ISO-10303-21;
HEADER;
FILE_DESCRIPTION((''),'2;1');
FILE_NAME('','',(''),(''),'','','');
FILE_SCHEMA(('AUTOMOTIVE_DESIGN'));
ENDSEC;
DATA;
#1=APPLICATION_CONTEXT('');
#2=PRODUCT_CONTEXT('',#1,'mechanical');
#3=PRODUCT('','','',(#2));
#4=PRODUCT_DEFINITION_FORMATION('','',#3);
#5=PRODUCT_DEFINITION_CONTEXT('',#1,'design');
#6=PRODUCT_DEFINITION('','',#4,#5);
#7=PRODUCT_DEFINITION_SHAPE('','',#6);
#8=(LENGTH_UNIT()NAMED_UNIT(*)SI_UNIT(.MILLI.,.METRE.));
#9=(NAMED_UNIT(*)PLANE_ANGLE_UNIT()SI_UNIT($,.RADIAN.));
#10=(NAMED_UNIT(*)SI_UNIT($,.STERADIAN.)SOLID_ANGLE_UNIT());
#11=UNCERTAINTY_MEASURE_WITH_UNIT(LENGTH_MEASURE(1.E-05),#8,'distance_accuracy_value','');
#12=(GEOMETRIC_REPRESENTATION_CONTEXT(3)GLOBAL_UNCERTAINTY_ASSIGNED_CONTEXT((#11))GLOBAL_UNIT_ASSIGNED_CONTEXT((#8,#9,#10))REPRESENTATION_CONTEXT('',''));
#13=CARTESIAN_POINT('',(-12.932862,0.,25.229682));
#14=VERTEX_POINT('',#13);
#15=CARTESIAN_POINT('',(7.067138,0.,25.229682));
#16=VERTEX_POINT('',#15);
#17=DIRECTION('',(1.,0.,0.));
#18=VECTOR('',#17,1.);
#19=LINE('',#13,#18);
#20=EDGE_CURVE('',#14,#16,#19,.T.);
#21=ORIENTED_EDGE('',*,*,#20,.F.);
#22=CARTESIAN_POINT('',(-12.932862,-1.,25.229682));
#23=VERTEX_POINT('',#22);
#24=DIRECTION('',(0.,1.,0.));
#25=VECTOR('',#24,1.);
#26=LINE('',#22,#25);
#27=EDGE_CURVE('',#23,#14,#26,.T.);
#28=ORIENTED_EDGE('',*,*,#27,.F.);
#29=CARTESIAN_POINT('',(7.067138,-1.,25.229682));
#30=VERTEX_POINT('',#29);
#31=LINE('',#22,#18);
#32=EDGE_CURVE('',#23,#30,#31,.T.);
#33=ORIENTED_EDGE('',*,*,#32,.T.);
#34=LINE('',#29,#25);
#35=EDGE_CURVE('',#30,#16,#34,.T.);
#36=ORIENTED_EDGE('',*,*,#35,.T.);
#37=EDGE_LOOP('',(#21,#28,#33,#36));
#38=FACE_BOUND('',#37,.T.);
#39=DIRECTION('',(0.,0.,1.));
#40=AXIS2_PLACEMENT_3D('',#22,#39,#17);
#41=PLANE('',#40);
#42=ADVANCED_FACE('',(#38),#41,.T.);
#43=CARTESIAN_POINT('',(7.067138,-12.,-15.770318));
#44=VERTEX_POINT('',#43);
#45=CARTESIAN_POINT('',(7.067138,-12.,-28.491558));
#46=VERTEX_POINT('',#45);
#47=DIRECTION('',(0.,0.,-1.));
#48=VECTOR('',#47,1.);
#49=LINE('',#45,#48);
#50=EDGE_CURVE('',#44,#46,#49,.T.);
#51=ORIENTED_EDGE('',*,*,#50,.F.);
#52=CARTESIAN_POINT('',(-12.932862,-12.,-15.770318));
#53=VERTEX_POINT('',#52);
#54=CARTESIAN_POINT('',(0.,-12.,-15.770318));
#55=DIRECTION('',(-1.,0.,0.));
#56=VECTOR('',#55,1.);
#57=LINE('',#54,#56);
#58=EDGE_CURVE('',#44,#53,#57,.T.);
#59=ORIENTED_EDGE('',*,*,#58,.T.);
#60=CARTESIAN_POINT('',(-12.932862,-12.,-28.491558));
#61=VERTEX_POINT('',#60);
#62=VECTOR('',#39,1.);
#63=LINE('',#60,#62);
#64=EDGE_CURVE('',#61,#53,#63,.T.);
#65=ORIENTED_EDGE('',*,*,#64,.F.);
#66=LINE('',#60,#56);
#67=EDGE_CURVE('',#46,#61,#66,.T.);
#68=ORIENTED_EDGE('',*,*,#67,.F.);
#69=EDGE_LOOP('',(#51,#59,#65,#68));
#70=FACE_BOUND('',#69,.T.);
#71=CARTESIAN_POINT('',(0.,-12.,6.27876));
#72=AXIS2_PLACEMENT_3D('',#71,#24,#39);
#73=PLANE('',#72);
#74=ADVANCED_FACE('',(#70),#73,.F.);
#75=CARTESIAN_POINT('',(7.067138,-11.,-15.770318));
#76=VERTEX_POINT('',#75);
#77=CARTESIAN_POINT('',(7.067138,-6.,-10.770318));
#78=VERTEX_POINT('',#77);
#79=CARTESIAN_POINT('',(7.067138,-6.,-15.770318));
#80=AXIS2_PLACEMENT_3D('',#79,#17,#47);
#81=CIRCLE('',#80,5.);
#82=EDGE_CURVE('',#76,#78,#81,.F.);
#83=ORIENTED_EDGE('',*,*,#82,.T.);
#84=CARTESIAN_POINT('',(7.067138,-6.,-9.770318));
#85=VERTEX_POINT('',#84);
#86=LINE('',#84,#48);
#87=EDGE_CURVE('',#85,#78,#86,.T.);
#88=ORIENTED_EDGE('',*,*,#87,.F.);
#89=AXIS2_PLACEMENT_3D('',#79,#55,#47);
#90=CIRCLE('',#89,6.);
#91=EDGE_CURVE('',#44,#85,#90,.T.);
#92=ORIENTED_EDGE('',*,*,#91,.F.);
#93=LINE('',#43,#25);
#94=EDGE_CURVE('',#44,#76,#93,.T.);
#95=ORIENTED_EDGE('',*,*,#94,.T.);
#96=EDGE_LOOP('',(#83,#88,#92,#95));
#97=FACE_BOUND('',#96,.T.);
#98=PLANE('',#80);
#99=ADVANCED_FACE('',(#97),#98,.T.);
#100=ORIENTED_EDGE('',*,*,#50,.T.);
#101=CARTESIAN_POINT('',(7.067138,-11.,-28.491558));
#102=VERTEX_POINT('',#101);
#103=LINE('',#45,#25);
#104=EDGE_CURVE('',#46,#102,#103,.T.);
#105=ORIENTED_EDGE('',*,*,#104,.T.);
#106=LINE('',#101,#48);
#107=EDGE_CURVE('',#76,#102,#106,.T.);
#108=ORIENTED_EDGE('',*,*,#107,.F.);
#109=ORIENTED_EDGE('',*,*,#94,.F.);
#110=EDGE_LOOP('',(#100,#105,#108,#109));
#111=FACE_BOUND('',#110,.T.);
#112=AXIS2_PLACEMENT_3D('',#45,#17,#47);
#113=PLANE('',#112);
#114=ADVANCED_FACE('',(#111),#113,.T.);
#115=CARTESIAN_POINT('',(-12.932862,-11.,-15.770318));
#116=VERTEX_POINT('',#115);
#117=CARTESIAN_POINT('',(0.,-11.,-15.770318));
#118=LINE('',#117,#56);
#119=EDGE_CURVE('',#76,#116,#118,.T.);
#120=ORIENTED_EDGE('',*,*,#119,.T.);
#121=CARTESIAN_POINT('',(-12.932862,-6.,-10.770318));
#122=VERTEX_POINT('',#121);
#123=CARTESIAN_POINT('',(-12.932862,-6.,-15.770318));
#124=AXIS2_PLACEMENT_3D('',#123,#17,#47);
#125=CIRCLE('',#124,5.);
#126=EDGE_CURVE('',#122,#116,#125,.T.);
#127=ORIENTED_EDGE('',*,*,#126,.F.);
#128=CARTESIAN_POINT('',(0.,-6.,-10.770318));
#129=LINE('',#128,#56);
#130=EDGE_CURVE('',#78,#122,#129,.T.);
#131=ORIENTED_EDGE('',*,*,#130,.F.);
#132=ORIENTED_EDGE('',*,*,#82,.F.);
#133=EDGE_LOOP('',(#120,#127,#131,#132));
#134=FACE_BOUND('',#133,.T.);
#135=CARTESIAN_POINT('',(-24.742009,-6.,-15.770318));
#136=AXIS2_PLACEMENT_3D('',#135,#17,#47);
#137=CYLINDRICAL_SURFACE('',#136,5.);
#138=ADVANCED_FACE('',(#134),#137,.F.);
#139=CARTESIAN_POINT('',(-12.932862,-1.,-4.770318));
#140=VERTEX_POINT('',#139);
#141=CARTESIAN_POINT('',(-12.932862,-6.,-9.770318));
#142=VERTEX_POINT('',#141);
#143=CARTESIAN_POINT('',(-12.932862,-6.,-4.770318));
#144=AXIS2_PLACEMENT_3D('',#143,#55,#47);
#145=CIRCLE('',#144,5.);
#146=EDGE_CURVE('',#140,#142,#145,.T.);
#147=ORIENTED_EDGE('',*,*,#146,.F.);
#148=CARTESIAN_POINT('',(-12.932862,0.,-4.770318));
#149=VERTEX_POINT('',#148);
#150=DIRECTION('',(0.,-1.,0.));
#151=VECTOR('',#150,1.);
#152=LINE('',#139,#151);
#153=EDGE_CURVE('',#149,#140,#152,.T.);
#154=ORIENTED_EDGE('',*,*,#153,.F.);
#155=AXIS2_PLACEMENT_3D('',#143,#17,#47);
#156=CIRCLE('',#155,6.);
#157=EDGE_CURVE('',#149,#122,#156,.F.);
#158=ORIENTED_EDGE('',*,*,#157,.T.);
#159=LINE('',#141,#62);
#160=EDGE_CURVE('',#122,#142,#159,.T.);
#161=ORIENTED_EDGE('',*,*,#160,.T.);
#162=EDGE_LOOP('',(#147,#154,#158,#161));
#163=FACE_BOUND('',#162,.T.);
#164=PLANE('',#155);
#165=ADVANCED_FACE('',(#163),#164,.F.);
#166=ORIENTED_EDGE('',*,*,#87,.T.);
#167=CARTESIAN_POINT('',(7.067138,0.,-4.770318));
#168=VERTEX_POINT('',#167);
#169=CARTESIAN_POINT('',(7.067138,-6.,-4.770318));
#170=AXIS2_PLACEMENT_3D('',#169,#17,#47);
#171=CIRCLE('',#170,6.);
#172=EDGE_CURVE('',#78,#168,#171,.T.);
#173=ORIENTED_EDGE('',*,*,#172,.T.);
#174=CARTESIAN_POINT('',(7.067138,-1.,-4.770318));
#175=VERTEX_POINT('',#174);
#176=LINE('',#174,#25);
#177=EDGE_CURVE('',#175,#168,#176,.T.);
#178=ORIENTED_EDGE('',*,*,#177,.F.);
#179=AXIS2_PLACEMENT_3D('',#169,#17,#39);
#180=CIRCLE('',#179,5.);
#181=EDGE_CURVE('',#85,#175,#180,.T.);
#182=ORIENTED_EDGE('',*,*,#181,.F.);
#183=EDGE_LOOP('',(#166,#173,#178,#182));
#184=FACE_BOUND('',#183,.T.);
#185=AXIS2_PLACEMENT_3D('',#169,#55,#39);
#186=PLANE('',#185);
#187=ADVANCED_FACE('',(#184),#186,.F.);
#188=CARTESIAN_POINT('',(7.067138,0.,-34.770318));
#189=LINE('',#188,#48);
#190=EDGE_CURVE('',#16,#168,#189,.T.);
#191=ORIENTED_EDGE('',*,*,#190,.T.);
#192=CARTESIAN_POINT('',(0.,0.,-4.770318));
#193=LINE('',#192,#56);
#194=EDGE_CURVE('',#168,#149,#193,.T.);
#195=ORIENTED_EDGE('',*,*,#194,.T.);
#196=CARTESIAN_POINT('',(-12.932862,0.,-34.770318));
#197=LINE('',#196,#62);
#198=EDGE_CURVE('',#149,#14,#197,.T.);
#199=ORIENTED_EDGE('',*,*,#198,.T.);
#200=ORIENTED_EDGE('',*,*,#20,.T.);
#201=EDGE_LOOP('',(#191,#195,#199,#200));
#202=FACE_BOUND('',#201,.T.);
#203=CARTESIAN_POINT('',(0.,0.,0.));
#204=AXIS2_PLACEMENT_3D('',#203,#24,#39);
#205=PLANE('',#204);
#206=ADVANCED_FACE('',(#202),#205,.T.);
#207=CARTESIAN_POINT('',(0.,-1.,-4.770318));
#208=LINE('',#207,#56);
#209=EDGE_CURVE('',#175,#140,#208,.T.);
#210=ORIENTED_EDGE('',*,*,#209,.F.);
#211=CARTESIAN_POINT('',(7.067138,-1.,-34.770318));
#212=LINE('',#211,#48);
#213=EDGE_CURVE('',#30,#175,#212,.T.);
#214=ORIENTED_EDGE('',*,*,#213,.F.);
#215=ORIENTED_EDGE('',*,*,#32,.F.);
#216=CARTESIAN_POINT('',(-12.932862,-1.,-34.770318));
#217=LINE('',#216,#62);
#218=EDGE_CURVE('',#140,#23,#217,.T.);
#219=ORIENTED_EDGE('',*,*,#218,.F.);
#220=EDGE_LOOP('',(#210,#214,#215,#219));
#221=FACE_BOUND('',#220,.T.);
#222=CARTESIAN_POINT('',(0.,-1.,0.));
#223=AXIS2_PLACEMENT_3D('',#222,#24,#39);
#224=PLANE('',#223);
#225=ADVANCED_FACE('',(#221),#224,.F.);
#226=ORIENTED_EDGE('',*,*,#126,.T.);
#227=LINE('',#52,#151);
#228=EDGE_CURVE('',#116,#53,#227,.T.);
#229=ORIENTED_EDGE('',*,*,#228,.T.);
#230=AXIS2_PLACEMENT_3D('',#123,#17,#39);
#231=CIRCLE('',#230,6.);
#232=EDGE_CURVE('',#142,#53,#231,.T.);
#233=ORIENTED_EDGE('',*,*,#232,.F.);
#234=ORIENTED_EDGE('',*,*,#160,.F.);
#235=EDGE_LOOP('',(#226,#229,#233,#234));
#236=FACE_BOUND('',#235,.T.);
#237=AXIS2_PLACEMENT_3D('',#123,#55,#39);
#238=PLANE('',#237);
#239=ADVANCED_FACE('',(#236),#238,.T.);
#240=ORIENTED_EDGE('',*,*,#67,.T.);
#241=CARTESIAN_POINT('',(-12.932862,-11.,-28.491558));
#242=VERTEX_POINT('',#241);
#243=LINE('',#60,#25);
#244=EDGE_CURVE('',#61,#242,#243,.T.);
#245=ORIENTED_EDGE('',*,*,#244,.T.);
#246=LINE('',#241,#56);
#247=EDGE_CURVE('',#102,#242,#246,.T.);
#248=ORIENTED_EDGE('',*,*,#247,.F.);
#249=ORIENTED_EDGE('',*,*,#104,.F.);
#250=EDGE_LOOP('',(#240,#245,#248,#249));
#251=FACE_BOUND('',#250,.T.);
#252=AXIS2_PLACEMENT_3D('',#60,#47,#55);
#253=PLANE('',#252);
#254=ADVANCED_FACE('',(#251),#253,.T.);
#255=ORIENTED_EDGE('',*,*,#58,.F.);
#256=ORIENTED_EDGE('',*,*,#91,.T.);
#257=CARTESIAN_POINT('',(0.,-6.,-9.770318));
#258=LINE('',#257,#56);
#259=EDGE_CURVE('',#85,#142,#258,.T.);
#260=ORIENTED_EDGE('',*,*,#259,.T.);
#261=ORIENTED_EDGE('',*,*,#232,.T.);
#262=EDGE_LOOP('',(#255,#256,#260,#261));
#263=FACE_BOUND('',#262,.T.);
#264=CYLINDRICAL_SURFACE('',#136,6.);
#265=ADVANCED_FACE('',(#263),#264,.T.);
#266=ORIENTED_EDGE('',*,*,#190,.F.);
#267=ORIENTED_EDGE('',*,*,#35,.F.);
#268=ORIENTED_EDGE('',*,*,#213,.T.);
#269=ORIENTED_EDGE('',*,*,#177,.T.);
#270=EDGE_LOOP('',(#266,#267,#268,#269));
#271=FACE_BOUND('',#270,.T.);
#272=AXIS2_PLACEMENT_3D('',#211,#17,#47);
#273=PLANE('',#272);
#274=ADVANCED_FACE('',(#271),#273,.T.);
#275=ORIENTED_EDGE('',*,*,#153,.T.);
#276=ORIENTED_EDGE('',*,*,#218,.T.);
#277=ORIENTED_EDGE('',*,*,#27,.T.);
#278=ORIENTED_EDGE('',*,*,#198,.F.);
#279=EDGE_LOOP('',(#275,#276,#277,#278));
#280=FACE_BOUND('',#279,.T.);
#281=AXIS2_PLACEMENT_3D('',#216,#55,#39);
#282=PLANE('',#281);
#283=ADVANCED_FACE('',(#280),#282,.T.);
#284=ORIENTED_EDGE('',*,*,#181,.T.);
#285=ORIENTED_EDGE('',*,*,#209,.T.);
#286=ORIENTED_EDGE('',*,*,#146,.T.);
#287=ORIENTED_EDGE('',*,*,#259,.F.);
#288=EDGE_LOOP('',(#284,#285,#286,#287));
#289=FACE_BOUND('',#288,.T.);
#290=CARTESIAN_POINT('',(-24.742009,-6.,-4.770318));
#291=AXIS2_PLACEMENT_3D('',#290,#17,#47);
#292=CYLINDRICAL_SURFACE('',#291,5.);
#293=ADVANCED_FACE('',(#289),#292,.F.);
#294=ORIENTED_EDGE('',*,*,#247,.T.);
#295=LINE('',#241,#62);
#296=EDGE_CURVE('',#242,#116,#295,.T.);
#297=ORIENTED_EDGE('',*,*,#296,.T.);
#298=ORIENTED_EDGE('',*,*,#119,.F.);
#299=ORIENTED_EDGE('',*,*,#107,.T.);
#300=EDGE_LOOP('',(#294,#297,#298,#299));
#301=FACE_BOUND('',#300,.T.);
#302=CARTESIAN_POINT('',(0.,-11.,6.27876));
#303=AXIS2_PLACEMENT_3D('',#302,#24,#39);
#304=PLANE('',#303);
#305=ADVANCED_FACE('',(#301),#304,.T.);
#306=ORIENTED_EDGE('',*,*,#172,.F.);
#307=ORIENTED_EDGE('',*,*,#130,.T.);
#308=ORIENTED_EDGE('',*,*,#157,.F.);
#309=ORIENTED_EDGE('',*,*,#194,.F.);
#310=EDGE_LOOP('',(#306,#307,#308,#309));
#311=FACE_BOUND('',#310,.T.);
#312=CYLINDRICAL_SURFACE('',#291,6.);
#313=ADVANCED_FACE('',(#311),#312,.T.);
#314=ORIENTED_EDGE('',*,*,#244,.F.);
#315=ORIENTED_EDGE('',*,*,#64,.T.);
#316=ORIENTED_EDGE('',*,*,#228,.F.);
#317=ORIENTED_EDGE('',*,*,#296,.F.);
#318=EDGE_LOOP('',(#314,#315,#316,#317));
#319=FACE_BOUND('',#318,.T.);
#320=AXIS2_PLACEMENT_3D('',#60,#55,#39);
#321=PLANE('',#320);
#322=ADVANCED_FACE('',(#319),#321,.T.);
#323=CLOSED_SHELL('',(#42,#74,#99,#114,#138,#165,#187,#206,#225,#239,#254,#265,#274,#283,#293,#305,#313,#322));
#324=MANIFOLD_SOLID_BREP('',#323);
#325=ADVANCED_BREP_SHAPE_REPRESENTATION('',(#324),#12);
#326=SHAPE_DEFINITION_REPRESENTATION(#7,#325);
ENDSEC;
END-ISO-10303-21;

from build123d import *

# Parameters (mm, degrees)
SKETCH1_W          = 20
SKETCH1_H          = 60
BASE_FLANGE1_DEPTH = 1
JOG1_START         = -12.932862191
JOG1_DEPTH         = 20
JOG1_2_DEPTH       = 20


# Read off the part's stored shape, not the designer's step: Jog1
# Sheet-metal steps are written as plain solids
with BuildPart() as part:
    # Sketch1 → Base-Flange1 (new body)
    with BuildSketch(Plane(origin=(0, 0, 0), x_dir=(1, 0, 0), z_dir=(0, 1, 0))):
        with Locations((-2.932862191, 4.770318021)):
            Rectangle(SKETCH1_W, SKETCH1_H)
    extrude(amount=-BASE_FLANGE1_DEPTH)

    # Jog1 outline → Jog1 (cut)
    with BuildSketch(Plane.YZ.offset(JOG1_START)):
        with BuildLine():
            ThreePointArc((0, -4.770318021), (-0.255437354, -6.502368828), (-1, -8.086942811))
            Line((-1, -8.086942811), (-1, -34.770318021))
            Line((-1, -34.770318021), (0, -34.770318021))
            Line((0, -34.770318021), (0, -4.770318021))
        make_face()
    extrude(amount=JOG1_DEPTH, mode=Mode.SUBTRACT)

    # Jog1 2 outline → Jog1 2 (add)
    with BuildSketch(Plane.YZ.offset(JOG1_START)):
        with BuildLine():
            ThreePointArc((-1, -4.770318021), (-2.464466094, -8.305851927), (-6, -9.770318021))
            ThreePointArc((-6, -9.770318021), (-10.242640687, -11.527677334), (-12, -15.770318021))
            Line((-12, -15.770318021), (-12, -28.491558426))
            Line((-12, -28.491558426), (-11, -28.491558426))
            Line((-11, -28.491558426), (-11, -15.770318021))
            ThreePointArc((-11, -15.770318021), (-9.535533906, -12.234784115), (-6, -10.770318021))
            ThreePointArc((-6, -10.770318021), (-3.162725669, -10.057082095), (-1, -8.086942811))
            Line((-1, -8.086942811), (-1, -4.770318021))
        make_face()
    extrude(amount=JOG1_2_DEPTH)


solid = part.part
